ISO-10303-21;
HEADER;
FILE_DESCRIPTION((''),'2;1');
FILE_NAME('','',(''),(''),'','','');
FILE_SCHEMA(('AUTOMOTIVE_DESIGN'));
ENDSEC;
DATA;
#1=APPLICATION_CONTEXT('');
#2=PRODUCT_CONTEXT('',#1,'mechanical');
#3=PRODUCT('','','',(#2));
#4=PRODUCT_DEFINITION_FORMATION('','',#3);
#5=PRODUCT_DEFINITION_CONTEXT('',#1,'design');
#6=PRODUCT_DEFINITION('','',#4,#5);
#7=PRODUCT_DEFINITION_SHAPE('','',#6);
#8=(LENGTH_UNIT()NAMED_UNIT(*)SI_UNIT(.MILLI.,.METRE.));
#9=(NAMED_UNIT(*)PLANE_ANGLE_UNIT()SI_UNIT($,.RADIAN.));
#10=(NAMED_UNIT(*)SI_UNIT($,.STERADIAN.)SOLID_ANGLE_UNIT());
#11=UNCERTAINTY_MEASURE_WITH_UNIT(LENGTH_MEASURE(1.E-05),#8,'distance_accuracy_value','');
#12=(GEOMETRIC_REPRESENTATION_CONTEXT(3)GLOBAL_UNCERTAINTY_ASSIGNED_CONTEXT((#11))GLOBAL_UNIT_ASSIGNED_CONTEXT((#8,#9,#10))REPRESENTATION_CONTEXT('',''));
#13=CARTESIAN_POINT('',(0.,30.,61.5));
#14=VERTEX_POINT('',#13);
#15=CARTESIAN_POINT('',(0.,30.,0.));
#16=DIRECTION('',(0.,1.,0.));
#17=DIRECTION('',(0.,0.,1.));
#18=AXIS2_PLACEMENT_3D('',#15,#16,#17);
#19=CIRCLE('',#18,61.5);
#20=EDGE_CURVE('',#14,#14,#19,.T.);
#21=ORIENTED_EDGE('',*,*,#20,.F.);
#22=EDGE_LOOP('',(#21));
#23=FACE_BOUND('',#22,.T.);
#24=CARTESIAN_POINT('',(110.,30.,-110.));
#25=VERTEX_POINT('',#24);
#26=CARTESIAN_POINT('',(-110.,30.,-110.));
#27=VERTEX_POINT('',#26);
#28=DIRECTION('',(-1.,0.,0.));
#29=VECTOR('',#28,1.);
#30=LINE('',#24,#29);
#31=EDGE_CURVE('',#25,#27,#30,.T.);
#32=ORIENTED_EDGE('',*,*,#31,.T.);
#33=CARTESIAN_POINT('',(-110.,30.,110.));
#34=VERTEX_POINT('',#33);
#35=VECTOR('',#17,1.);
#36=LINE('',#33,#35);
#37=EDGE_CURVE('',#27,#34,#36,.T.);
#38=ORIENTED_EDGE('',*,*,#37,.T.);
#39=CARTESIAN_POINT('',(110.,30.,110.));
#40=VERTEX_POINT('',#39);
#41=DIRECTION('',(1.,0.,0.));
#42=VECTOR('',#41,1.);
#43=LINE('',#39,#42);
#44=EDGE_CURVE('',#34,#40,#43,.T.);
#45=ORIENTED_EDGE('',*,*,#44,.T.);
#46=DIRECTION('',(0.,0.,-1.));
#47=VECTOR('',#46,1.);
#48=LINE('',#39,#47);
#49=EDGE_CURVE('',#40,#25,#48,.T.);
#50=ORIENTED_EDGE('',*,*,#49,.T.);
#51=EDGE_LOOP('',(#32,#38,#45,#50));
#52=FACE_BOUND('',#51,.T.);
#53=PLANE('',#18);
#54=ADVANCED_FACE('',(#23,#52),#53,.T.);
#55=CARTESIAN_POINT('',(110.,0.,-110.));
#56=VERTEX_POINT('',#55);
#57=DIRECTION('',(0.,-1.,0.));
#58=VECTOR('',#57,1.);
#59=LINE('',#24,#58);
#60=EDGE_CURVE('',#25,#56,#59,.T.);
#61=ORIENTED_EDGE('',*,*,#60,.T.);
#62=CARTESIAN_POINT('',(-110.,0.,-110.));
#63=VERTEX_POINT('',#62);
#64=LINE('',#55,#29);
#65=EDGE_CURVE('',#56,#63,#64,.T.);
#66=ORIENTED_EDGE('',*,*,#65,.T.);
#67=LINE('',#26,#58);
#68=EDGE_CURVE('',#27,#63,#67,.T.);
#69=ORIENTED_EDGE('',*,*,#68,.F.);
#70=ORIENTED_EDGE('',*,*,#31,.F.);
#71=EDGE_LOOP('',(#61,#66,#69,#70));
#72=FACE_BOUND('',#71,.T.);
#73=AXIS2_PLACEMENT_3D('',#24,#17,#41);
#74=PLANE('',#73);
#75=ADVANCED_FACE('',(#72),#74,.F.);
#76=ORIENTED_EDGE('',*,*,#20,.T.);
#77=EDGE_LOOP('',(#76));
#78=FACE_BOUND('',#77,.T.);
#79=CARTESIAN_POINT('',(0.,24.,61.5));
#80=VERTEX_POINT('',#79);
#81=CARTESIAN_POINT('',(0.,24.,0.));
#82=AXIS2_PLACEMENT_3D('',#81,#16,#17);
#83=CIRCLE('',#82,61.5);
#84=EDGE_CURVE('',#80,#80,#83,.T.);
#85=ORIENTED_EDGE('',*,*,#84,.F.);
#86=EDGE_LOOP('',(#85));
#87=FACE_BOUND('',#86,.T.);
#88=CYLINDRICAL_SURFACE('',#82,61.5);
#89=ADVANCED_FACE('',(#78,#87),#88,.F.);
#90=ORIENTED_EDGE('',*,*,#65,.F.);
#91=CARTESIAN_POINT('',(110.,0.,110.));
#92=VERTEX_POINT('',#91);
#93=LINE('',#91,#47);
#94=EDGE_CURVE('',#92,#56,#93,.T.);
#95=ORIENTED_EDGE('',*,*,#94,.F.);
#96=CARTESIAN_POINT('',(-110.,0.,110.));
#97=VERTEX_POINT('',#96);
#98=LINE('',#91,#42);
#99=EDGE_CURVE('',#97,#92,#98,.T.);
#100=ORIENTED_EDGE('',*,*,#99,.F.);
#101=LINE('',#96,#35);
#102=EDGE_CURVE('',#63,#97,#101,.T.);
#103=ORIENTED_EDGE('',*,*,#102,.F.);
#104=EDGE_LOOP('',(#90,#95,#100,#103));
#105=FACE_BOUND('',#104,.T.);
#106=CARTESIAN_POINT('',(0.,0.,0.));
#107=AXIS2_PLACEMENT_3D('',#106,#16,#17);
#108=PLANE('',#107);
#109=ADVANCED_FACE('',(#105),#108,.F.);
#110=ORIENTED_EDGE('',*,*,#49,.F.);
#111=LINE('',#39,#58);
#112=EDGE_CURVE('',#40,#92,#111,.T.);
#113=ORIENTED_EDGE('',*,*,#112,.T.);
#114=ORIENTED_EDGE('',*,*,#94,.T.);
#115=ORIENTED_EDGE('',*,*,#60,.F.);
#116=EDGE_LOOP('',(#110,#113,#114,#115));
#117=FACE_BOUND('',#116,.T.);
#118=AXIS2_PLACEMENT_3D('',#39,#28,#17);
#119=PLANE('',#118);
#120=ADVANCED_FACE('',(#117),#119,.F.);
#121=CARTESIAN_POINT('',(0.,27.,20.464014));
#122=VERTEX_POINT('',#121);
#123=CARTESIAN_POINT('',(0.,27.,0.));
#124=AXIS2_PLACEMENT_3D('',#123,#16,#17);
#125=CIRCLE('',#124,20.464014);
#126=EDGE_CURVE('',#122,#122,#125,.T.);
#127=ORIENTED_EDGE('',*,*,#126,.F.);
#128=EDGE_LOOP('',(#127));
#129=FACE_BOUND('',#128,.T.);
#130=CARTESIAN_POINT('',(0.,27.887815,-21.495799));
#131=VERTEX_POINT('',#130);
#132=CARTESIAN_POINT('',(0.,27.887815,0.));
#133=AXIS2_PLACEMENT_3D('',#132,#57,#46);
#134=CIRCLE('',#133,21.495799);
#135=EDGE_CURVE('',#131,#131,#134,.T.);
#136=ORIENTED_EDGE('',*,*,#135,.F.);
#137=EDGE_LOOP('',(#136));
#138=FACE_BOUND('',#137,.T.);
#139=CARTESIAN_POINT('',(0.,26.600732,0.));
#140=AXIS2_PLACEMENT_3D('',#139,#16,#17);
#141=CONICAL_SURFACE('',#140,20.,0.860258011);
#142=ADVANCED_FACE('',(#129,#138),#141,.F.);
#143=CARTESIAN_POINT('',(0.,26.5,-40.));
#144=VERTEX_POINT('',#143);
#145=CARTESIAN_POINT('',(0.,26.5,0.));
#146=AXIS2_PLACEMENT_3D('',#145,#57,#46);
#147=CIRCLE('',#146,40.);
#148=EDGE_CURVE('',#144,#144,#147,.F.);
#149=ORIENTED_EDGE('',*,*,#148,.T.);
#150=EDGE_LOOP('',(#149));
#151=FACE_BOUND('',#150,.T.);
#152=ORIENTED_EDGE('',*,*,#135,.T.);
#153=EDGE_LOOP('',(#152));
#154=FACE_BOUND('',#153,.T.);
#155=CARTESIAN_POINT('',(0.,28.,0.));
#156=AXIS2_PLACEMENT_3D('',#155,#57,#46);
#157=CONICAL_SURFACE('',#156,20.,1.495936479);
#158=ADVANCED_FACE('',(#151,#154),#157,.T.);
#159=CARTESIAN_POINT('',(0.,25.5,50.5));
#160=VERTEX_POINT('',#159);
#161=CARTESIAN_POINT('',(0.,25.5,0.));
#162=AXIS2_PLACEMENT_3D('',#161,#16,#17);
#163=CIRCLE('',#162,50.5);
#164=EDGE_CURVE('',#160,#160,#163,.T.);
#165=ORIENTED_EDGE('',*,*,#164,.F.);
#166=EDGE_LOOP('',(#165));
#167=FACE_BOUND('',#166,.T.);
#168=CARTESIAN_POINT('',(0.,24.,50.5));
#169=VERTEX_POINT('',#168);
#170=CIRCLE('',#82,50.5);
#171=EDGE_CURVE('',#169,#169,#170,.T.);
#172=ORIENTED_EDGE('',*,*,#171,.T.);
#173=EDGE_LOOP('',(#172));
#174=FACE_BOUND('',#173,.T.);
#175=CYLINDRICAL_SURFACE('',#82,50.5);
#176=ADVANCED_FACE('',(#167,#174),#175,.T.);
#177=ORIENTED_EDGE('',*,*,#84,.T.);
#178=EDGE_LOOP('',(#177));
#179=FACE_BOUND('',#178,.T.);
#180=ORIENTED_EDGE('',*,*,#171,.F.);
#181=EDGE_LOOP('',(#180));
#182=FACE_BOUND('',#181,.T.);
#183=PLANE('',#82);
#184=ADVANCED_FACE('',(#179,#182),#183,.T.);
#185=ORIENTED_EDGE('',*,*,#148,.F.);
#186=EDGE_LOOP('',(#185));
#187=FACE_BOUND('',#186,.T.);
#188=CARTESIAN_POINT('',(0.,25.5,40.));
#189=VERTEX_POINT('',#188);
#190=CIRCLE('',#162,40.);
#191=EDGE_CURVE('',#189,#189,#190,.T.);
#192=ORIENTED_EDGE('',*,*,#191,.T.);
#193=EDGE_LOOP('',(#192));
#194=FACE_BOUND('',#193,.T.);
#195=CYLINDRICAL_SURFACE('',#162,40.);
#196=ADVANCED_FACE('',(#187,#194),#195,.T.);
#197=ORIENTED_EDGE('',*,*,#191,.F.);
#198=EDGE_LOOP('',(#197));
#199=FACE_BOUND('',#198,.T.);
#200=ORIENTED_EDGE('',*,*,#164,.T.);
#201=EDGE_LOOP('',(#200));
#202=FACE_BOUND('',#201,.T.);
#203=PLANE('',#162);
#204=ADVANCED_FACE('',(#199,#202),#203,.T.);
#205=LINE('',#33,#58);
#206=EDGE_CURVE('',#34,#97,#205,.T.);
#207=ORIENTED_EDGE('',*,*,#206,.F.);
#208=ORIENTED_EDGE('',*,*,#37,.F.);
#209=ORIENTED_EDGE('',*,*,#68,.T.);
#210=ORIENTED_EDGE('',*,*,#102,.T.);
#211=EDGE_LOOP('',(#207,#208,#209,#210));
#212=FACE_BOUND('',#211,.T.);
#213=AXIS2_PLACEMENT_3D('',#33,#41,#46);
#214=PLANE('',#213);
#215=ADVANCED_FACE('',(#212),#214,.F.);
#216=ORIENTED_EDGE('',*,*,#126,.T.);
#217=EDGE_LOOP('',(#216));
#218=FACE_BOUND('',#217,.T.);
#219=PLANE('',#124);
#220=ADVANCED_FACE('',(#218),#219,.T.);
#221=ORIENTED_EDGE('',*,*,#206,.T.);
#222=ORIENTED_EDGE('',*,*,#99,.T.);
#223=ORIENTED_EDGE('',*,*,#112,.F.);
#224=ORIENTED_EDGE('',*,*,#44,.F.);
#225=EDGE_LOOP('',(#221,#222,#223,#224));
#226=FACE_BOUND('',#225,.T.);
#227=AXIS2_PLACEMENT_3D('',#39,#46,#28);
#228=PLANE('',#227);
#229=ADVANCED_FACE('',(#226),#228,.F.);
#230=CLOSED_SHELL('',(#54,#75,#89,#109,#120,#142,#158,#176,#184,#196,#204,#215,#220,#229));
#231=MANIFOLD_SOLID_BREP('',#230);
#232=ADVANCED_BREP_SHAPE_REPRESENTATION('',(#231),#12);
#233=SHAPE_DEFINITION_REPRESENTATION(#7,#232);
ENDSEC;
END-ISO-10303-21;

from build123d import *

# Parameters (mm, degrees)
SKETCH1_W           = 220
SKETCH1_H           = 220
BOSS_EXTRUDE1_DEPTH = 30
SKETCH2_R           = 61.5
SKETCH2_R_2         = 50.5
CUT_EXTRUDE1_DEPTH  = 6
SKETCH3_R           = 50.5
SKETCH3_R_2         = 40
CUT_EXTRUDE2_DEPTH  = 4.5
SKETCH4_R           = 40
CUT_EXTRUDE3_DEPTH  = 3.5
SKETCH5_R           = 40
SKETCH6_R           = 20
SKETCH8_R           = 20
CUT_EXTRUDE4_DEPTH  = 1
CHAMFER1_SIZE       = 1.5
CHAMFER1_SIZE_2     = 1.399267753


with BuildPart() as part:
    # Sketch1 → Boss-Extrude1 (new body)
    with BuildSketch(Plane(origin=(0, 0, 0), x_dir=(1, 0, 0), z_dir=(0, 1, 0))):
        Rectangle(SKETCH1_W, SKETCH1_H)
    extrude(amount=BOSS_EXTRUDE1_DEPTH)

    # Sketch2 → Cut-Extrude1 (cut)
    with BuildSketch(Plane(origin=(0, 30, 0), x_dir=(1, 0, 0), z_dir=(0, 1, 0))):
        with Locations(Location((0, 0, 0), (0, 0, 270))):
            Circle(SKETCH2_R)
        with Locations(Location((0, 0, 0), (0, 0, 270))):
            Circle(SKETCH2_R_2, mode=Mode.SUBTRACT)
    extrude(amount=-CUT_EXTRUDE1_DEPTH, mode=Mode.SUBTRACT)

    # Sketch3 → Cut-Extrude2 (cut)
    with BuildSketch(Plane(origin=(0, 30, 0), x_dir=(1, 0, 0), z_dir=(0, 1, 0))):
        with Locations(Location((0, 0, 0), (0, 0, 270))):
            Circle(SKETCH3_R)
        with Locations(Location((0, 0, 0), (0, 0, 270))):
            Circle(SKETCH3_R_2, mode=Mode.SUBTRACT)
    extrude(amount=-CUT_EXTRUDE2_DEPTH, mode=Mode.SUBTRACT)

    # Sketch4 → Cut-Extrude3 (cut)
    with BuildSketch(Plane(origin=(0, 30, 0), x_dir=(1, 0, 0), z_dir=(0, 1, 0))):
        with Locations(Location((0, 0, 0), (0, 0, 270))):
            Circle(SKETCH4_R)
    extrude(amount=-CUT_EXTRUDE3_DEPTH, mode=Mode.SUBTRACT)

    # Sketch5 → Loft1 section 0
    with BuildSketch(Plane(origin=(0, 26.5, 0), x_dir=(1, 0, 0), z_dir=(0, 1, 0))):
        Circle(SKETCH5_R)
    # Sketch6 → Loft1 section 1
    with BuildSketch(Plane(origin=(0, 28, 0), x_dir=(1, 0, 0), z_dir=(0, 1, 0))):
        Circle(SKETCH6_R)
    loft()

    # Sketch8 → Cut-Extrude4 (cut)
    with BuildSketch(Plane(origin=(0, 28, 0), x_dir=(1, 0, 0), z_dir=(0, 1, 0))):
        with Locations(Location((0, 0, 0), (0, 0, 270))):
            Circle(SKETCH8_R)
    extrude(amount=-CUT_EXTRUDE4_DEPTH, mode=Mode.SUBTRACT)

    # Chamfer1
    # the kernel refuses this chamfer: 1.5, 1.399267753 mm, written as the material it takes off along each edge
    with BuildSketch(Plane(origin=(0, 28, 0), x_dir=(1, 0, 0), z_dir=(0, 0, 1))) as chamfer1_piece_1_section:
        Polygon((20 + CHAMFER1_SIZE * 0.997199309888, -CHAMFER1_SIZE * 0.0747899482416), (20, -CHAMFER1_SIZE_2), (20, 0), align=None)
    chamfer1_piece_1 = revolve(axis=Axis((0, 28, 0), (0, 1, 0)), revolution_arc=270, mode=Mode.PRIVATE)
    chamfer1_piece_1 = split(chamfer1_piece_1, bisect_by=Plane(origin=(-14.829664254, 27, -14.829664254), z_dir=(0, 1, 0)), keep=Keep.TOP, mode=Mode.PRIVATE)
    add(chamfer1_piece_1, mode=Mode.SUBTRACT)
    with BuildSketch(Plane(origin=(0, 28, 0), x_dir=(0, 0, 1), z_dir=(-1, 0, 0))) as chamfer1_piece_2_section:
        Polygon((20 + CHAMFER1_SIZE * 0.997199309888, -CHAMFER1_SIZE * 0.0747899482416), (20, -CHAMFER1_SIZE_2), (20, 0), align=None)
    chamfer1_piece_2 = revolve(axis=Axis((0, 28, 0), (0, 1, 0)), revolution_arc=90, mode=Mode.PRIVATE)
    chamfer1_piece_2 = split(chamfer1_piece_2, bisect_by=Plane(origin=(14.836241564, 27, 14.836241564), z_dir=(0, 1, 0)), keep=Keep.TOP, mode=Mode.PRIVATE)
    add(chamfer1_piece_2, mode=Mode.SUBTRACT)


solid = part.part
